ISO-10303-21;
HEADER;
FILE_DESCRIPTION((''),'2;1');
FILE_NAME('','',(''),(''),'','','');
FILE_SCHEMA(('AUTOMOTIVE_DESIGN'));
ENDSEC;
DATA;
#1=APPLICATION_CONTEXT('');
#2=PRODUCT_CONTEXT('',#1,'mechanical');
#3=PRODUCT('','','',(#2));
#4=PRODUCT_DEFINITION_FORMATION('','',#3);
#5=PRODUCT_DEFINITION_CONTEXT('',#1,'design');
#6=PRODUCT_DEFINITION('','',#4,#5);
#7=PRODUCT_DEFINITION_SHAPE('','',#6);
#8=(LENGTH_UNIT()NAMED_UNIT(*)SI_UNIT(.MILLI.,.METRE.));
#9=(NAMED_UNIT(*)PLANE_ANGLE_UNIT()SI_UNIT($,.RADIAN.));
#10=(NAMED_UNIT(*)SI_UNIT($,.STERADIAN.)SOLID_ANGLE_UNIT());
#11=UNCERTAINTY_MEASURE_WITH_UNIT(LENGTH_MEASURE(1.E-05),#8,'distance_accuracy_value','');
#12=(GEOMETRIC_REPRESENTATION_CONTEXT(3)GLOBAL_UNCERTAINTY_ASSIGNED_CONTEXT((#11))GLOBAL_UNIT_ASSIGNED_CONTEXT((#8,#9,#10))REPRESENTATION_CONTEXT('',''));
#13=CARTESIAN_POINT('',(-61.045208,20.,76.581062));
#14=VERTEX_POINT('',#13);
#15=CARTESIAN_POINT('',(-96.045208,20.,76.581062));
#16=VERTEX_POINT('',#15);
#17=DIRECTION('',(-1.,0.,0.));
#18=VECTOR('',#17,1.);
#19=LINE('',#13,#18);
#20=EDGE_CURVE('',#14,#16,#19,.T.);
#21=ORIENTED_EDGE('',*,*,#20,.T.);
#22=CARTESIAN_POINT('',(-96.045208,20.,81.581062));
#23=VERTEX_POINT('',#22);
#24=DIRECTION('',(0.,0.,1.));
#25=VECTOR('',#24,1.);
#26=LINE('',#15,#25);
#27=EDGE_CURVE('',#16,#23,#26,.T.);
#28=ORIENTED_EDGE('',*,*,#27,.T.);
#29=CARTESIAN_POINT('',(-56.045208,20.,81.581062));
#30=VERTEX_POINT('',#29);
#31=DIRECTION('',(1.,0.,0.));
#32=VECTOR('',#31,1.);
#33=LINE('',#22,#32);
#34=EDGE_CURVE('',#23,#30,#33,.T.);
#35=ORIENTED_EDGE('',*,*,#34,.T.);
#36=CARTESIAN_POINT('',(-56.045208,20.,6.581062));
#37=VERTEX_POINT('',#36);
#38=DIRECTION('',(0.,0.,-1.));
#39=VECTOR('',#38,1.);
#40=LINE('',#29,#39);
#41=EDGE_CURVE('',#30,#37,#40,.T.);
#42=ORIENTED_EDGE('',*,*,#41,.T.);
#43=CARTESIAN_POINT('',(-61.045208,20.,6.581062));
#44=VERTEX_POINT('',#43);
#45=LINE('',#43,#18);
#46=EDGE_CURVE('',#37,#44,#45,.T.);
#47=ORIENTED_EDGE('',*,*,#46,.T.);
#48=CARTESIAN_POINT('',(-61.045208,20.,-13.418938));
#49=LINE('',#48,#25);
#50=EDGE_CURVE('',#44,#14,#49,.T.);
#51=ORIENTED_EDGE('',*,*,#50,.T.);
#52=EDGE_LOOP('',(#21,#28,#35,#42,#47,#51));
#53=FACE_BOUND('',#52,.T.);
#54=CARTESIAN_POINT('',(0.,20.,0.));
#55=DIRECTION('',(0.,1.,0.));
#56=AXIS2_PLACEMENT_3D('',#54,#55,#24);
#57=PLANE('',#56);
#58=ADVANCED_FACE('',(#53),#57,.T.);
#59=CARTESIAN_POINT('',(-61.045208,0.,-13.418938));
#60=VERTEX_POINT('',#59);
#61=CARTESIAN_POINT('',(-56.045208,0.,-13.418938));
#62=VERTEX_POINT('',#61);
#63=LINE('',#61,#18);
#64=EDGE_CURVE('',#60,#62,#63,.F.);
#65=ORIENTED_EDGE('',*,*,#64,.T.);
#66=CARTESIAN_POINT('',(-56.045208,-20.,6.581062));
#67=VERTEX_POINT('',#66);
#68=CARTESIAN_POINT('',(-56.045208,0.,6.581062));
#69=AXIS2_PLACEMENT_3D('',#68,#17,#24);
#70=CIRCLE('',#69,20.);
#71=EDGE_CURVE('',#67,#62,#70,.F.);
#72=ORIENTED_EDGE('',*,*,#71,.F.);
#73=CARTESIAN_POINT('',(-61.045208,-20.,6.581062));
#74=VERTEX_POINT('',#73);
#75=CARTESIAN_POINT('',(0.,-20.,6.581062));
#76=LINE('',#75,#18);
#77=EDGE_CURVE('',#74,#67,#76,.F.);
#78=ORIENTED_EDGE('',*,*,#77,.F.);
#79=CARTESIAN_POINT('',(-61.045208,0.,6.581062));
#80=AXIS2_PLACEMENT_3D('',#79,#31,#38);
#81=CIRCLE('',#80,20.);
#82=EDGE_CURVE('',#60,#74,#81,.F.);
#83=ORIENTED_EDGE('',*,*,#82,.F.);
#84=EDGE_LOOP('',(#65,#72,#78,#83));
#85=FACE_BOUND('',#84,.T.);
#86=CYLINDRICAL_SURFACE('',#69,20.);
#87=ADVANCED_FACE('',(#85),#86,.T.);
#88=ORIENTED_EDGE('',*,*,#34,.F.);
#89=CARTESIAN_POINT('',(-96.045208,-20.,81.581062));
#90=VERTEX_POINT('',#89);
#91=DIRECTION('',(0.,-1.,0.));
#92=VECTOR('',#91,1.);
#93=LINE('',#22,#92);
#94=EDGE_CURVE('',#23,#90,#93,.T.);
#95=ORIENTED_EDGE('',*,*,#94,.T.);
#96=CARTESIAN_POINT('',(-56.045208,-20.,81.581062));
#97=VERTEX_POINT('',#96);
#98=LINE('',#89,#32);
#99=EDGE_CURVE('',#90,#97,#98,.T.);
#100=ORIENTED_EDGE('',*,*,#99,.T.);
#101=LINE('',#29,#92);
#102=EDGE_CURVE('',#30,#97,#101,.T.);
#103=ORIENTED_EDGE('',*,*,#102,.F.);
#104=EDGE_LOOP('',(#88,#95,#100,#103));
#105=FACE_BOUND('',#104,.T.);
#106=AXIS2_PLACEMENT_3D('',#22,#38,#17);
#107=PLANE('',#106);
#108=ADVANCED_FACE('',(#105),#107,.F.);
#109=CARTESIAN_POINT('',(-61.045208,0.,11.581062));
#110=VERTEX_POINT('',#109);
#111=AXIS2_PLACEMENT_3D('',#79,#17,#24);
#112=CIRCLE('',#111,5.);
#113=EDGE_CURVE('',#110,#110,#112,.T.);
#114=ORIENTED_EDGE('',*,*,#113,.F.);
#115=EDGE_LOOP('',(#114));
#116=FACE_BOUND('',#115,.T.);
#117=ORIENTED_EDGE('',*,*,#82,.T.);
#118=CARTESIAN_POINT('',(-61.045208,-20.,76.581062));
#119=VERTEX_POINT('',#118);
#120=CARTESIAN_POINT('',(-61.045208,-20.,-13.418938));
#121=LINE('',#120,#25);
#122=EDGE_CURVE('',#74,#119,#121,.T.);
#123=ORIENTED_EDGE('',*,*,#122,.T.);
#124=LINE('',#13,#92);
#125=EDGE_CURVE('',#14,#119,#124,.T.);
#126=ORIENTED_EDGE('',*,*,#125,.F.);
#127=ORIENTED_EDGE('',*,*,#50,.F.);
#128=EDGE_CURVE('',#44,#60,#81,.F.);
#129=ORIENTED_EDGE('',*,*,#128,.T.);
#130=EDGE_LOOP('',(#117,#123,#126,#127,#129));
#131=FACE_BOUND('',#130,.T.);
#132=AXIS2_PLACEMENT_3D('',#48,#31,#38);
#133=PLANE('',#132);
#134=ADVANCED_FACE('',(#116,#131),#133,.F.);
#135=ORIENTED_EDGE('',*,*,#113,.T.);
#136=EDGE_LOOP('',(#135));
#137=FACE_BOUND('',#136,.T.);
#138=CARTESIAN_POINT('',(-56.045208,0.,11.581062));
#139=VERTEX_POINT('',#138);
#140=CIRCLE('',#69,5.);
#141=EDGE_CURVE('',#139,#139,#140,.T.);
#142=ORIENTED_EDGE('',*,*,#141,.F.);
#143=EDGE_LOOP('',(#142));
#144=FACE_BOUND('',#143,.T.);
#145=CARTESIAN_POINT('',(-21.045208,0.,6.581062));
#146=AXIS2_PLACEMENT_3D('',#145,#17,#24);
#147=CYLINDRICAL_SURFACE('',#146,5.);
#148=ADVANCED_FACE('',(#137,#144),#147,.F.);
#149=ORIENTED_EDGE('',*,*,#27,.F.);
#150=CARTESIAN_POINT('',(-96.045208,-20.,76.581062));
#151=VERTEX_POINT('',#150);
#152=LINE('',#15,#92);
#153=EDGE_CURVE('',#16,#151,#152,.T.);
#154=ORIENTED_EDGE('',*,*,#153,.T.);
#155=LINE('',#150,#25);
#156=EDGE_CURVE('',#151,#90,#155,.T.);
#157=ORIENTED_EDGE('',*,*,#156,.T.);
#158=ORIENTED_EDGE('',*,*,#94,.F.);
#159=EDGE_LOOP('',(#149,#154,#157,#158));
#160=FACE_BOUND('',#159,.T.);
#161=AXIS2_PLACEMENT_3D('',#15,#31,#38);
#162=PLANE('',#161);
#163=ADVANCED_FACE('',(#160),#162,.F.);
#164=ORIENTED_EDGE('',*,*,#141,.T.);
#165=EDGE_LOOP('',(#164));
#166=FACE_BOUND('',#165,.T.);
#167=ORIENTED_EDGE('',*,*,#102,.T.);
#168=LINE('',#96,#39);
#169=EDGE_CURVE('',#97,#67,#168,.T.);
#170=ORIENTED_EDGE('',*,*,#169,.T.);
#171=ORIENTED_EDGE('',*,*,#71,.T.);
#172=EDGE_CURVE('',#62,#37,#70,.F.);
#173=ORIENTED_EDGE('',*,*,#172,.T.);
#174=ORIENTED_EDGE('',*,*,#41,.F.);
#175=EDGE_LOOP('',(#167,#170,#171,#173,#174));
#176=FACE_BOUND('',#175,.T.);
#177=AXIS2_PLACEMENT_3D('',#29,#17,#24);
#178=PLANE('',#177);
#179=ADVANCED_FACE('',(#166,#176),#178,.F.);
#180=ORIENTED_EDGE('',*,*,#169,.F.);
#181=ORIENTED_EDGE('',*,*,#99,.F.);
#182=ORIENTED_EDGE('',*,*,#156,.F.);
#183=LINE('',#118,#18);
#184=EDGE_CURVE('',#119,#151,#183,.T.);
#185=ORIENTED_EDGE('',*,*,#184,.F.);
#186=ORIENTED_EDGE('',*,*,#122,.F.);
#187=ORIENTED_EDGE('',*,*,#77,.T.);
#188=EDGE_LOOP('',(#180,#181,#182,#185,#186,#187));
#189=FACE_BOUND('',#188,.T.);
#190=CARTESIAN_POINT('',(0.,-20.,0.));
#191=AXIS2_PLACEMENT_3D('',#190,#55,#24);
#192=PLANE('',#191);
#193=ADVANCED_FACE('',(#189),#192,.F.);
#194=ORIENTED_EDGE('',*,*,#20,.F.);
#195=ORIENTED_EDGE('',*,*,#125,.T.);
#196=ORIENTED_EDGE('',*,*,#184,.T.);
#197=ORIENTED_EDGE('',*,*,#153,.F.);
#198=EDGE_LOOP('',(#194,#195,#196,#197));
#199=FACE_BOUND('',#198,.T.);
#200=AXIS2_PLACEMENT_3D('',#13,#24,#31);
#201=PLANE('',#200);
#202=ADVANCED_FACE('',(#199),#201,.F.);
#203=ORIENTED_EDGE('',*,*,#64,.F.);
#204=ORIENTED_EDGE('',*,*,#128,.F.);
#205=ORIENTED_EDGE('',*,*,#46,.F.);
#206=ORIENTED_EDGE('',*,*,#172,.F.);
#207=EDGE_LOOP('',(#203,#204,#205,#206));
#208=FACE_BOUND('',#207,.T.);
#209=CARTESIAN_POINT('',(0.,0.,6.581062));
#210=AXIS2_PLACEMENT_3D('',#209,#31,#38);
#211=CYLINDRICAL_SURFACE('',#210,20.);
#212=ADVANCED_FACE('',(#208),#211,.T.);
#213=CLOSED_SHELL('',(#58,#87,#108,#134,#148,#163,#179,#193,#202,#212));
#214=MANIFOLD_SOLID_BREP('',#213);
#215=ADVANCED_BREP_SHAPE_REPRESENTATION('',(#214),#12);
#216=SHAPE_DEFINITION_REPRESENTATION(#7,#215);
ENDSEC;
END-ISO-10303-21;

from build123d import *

# Parameters (mm, degrees)
BOSS_EXTRUDE1_DEPTH = 20
SKETCH2_R           = 5
CUT_EXTRUDE1_DEPTH  = 40
FILLET1_R           = 20
FILLET2_R           = 20


with BuildPart() as part:
    # Sketch1 → Boss-Extrude1 (new, symmetric)
    with BuildSketch(Plane(origin=(0, 0, 0), x_dir=(1, 0, 0), z_dir=(0, 1, 0))):
        Polygon((-56.045207575, 13.418938385), (-61.045207575, 13.418938385), (-61.045207575, -76.581061615), (-96.045207575, -76.581061615), (-96.045207575, -81.581061615), (-56.045207575, -81.581061615), align=None)
    extrude(amount=BOSS_EXTRUDE1_DEPTH, both=True)

    # Sketch2 → Cut-Extrude1 (cut)
    with BuildSketch(Plane.ZY.offset(61.045207575)):
        with Locations((6.581061615, 0)):
            Circle(SKETCH2_R)
    extrude(amount=-CUT_EXTRUDE1_DEPTH, mode=Mode.SUBTRACT)

    # Fillet1
    fillet1_edges = [part.edges().sort_by_distance(p)[0] for p in [
        (-58.545207575, 20, -13.418938385),
    ]]
    fillet(fillet1_edges, radius=FILLET1_R)

    # Fillet2
    fillet2_edges = [part.edges().sort_by_distance(p)[0] for p in [
        (-58.545207575, -20, -13.418938385),
    ]]
    fillet(fillet2_edges, radius=FILLET2_R - 0.0001)  # a hair under: the kernel refuses the full size


solid = part.part
